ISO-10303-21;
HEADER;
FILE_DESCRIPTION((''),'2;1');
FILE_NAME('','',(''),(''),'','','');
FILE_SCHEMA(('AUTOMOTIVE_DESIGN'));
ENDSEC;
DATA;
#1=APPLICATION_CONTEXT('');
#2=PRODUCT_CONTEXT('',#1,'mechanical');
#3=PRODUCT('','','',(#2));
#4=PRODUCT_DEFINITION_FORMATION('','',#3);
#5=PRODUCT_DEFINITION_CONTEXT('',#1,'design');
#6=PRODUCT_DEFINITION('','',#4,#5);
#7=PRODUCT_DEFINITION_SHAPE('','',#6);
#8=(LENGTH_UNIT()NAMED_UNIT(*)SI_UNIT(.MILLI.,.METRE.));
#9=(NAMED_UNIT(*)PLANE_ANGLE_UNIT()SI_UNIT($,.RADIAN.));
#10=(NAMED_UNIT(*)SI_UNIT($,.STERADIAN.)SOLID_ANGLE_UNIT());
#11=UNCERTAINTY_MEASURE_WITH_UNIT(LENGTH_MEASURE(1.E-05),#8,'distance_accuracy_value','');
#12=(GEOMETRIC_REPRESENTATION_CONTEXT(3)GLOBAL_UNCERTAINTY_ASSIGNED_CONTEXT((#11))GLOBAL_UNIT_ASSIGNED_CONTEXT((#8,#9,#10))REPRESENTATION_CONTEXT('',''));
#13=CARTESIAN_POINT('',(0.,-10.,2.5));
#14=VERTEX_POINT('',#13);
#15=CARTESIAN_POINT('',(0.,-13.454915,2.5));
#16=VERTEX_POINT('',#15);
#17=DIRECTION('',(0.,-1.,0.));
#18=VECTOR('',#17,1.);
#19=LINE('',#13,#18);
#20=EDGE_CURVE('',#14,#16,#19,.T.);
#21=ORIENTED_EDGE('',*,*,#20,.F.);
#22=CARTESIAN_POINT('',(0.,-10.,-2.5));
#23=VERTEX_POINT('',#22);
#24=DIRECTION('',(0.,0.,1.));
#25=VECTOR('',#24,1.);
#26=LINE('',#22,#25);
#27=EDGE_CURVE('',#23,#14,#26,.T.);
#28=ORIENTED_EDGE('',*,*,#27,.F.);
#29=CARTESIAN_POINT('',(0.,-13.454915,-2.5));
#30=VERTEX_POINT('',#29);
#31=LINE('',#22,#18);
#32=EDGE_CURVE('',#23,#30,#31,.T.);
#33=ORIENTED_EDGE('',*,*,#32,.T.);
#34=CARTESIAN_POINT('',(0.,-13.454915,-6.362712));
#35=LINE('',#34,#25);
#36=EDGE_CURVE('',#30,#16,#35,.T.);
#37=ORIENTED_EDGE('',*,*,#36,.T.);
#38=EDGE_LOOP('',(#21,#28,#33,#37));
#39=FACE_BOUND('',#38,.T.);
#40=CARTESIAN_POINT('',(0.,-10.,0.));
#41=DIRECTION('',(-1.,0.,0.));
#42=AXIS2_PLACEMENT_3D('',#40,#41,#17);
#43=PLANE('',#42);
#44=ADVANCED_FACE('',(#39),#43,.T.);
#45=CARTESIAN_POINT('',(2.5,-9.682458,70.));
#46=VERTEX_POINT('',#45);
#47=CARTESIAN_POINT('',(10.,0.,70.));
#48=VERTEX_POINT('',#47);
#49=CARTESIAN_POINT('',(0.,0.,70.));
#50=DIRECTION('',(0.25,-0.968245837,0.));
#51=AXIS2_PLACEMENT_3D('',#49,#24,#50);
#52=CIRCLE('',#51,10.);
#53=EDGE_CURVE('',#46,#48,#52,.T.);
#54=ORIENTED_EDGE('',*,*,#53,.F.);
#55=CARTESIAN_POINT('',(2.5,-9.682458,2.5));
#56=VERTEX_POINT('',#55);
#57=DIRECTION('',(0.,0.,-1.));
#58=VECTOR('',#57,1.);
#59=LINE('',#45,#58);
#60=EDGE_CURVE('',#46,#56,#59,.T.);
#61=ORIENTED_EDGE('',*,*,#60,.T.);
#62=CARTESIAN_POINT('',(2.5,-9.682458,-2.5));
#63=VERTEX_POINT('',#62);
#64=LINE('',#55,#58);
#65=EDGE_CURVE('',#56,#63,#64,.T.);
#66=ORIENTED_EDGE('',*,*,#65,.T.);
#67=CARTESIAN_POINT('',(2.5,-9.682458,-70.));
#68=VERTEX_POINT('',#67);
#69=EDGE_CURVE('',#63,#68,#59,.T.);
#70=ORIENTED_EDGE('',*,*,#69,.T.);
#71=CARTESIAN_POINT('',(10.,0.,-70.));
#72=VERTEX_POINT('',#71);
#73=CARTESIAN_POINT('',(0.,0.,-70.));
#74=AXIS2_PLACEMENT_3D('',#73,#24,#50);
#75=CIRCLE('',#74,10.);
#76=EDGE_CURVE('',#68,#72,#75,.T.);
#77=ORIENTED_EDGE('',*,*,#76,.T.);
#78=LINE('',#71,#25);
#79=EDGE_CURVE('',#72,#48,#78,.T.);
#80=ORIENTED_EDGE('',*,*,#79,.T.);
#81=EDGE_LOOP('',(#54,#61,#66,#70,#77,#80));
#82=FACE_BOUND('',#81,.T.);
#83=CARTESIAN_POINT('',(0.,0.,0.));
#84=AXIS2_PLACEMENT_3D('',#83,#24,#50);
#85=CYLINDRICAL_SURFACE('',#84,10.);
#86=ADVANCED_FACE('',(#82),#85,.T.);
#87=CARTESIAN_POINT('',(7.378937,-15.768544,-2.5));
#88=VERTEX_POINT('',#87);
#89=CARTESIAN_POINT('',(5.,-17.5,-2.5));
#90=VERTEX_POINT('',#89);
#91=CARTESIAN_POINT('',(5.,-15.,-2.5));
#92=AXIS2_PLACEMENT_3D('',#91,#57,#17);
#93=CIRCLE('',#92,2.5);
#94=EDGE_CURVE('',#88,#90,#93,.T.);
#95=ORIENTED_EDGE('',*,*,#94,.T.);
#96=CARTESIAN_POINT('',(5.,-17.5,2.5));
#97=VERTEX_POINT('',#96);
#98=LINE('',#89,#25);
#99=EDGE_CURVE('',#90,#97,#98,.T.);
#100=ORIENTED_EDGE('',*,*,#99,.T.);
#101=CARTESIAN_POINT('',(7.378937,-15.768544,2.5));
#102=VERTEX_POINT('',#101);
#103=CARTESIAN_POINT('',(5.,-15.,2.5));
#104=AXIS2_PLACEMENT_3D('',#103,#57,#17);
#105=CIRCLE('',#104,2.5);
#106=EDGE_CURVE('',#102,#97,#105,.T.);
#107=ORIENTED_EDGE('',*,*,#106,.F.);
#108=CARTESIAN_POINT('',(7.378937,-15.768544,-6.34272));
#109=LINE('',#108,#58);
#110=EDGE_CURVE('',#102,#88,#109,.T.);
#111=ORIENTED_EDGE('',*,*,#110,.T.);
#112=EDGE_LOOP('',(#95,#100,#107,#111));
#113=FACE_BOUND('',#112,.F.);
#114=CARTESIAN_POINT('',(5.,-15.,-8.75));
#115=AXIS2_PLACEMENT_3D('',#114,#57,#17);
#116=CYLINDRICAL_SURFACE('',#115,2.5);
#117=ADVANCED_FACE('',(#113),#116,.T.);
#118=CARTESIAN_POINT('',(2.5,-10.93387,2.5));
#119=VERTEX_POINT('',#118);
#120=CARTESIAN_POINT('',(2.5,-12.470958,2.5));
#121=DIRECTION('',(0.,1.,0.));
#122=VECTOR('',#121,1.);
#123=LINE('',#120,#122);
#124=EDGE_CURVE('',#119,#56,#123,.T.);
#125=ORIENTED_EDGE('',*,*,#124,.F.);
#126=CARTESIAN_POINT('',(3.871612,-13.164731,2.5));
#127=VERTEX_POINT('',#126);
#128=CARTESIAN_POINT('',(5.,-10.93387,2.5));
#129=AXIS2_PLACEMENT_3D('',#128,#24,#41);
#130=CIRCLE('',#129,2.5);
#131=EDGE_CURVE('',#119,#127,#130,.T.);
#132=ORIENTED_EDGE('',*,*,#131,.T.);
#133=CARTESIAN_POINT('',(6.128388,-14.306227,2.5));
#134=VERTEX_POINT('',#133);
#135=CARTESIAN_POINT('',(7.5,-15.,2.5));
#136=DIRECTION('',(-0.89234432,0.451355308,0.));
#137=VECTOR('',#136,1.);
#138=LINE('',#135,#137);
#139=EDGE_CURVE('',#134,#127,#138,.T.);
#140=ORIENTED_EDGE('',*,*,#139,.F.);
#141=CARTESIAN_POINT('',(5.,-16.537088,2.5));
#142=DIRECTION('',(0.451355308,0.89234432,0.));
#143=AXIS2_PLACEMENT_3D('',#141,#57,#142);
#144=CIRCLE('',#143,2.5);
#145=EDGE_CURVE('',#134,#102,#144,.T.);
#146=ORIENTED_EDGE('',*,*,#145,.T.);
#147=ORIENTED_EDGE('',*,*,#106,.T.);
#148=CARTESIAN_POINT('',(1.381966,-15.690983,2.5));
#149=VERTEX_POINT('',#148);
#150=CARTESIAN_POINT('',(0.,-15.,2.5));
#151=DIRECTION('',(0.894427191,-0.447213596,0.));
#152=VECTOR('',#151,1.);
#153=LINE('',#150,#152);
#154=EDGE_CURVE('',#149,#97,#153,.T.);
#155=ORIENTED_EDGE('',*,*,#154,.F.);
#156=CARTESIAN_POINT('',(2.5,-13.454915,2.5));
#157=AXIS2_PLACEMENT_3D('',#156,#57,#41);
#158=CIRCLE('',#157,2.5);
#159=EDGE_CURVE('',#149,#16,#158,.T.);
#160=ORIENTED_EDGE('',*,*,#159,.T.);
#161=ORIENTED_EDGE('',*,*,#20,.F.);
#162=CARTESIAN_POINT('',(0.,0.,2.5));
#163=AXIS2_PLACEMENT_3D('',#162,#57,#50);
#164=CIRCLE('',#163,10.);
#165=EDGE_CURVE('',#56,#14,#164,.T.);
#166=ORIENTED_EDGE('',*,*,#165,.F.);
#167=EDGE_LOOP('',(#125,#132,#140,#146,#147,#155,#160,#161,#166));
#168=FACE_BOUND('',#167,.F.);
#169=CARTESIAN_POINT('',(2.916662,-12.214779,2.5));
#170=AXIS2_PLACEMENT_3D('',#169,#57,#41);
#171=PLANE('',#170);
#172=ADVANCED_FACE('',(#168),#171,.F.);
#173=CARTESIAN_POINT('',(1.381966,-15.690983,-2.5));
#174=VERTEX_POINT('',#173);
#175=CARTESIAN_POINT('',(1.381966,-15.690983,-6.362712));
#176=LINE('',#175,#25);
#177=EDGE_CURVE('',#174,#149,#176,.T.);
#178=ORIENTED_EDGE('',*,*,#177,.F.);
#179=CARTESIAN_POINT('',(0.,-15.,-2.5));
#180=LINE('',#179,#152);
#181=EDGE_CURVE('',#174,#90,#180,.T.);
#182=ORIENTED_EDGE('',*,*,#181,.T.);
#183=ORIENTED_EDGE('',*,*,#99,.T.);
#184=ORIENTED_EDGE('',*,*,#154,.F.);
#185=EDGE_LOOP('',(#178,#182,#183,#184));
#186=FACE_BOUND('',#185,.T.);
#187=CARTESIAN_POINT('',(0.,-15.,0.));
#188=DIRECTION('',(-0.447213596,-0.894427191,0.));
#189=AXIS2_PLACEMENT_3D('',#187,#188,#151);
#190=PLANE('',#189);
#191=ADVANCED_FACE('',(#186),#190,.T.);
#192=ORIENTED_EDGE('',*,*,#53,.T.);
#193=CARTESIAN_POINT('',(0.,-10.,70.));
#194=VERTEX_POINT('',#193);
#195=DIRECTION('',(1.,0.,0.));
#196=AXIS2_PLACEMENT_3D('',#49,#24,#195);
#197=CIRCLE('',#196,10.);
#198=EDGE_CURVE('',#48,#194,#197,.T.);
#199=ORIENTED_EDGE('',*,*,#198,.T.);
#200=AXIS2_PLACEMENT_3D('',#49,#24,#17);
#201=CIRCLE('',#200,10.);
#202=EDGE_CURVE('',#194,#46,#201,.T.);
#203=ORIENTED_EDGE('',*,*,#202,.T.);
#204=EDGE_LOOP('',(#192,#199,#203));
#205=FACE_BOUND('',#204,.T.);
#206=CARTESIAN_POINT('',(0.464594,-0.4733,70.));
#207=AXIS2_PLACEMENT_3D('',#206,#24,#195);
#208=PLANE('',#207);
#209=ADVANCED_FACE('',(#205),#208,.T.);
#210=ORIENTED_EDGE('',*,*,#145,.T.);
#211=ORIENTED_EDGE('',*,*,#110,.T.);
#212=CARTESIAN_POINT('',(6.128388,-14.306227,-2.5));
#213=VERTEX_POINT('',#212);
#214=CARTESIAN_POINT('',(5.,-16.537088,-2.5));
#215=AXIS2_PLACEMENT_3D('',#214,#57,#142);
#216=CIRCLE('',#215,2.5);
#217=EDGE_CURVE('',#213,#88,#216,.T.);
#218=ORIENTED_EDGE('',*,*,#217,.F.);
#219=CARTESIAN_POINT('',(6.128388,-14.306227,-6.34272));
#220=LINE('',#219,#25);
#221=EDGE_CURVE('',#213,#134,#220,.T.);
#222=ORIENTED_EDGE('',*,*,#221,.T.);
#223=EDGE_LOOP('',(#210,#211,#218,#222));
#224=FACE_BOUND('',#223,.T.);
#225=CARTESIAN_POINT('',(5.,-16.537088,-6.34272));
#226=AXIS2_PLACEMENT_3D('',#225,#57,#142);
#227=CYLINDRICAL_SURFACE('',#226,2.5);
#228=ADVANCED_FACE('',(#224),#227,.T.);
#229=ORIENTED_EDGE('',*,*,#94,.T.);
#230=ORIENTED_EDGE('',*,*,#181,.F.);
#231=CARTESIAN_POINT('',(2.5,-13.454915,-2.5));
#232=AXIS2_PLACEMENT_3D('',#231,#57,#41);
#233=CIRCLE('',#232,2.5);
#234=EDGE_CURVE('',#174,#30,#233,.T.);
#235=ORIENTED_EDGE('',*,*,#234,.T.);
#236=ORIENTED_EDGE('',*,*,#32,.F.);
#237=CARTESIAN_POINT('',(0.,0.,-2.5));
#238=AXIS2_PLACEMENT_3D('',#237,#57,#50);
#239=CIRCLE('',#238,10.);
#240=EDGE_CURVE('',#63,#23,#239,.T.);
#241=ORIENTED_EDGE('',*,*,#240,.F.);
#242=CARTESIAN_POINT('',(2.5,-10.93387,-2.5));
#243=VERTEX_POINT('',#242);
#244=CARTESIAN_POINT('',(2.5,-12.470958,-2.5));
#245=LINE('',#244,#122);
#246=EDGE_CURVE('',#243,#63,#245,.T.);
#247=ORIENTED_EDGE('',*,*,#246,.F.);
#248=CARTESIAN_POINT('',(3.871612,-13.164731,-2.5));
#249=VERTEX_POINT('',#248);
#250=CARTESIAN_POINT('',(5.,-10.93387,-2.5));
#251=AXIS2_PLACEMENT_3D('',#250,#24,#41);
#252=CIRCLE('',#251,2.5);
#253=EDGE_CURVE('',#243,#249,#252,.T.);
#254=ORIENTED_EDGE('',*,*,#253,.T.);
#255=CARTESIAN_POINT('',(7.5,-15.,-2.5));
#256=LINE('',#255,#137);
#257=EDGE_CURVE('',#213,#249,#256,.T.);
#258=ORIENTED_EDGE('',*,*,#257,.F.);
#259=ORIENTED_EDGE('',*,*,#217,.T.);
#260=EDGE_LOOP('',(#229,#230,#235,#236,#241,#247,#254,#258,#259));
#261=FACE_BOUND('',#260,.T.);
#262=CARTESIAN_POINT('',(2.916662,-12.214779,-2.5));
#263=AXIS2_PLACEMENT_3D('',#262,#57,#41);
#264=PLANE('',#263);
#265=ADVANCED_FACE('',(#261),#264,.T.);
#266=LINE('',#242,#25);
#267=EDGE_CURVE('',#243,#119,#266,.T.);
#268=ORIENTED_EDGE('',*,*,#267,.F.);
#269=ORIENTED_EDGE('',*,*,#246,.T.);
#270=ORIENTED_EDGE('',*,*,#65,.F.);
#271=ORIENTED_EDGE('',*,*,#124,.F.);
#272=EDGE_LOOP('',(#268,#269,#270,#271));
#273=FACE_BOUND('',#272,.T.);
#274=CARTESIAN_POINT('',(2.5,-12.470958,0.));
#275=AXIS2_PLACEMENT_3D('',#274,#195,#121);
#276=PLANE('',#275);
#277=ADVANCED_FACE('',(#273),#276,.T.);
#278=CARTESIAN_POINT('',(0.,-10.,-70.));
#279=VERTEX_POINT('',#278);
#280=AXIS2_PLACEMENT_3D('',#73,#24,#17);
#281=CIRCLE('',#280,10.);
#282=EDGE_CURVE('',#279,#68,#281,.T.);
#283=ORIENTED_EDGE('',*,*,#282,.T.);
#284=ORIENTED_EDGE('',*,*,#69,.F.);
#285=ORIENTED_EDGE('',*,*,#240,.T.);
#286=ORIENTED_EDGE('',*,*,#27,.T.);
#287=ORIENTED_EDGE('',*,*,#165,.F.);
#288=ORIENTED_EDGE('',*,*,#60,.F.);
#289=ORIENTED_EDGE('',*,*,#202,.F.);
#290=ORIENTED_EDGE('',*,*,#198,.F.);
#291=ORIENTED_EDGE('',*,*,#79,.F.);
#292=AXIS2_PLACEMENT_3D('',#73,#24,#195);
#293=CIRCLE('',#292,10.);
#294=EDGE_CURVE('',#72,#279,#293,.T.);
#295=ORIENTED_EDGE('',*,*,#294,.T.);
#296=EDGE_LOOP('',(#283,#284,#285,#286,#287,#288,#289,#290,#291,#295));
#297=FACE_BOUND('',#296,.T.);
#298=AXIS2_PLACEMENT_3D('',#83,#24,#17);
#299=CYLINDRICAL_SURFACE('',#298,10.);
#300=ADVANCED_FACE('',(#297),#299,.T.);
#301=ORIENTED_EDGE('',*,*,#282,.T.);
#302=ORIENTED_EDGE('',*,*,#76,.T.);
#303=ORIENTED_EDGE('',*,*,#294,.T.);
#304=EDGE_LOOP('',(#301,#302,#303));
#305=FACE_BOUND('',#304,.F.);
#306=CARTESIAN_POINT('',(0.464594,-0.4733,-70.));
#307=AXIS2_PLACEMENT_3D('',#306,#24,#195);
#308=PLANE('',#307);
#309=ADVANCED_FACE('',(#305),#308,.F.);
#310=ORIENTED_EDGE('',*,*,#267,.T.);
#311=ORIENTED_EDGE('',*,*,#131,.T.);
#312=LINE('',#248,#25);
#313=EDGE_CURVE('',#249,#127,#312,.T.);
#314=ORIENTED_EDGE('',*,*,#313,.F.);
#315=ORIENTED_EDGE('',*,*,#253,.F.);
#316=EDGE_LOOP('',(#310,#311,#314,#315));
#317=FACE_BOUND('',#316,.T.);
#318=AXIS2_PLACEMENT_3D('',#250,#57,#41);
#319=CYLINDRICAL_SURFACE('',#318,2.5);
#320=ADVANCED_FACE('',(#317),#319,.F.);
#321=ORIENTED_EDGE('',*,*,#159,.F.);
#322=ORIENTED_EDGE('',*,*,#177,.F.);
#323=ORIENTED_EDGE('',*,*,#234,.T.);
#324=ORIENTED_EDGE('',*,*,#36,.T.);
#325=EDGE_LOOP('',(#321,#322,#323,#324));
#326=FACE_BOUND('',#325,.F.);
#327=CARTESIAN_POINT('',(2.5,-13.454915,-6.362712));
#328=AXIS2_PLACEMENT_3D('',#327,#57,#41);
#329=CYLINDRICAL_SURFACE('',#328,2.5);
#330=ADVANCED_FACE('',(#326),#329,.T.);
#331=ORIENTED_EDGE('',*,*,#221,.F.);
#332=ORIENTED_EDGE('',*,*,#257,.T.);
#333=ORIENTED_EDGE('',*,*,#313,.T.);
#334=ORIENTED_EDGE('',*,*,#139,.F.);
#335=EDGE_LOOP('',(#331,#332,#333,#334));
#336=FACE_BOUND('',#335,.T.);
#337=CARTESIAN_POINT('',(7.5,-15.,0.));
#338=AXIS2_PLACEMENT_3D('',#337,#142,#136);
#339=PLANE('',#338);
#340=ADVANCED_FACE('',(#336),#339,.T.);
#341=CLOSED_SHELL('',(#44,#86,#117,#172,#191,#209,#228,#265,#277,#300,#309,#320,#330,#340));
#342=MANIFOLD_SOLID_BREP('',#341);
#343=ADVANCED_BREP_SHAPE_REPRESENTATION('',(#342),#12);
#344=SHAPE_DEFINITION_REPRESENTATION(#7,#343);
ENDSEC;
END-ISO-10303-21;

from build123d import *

# Parameters (mm, degrees)
F1_DEPTH    = 70
F2_DEPTH    = 2.5
F3_T1_DEPTH = 5
F3_T3_DEPTH = 12.6854399108
F3_T5_DEPTH = 17.5
F3_T7_DEPTH = 12.7254248594


# Not quite as in the source:
# - a fillet or chamfer that OpenCascade refuses, or shapes differently, is made with other operations: its cross-section is extruded or revolved along the edge and cut away or added


with BuildPart() as f1:
    # F0 (on Top) → F1 (new body, symmetric)
    with BuildSketch(Plane.XY):
        with BuildLine():
            ThreePointArc((2.5, -9.6824583655), (7.9056941504, -6.123724357), (10, 0))
            ThreePointArc((10, 0), (-7.0710678119, 7.0710678119), (0, -10))
            ThreePointArc((0, -10), (1.2600429248, -9.9202969627), (2.5, -9.6824583655))
        make_face()
    extrude(amount=F1_DEPTH, both=True)

    # F0 (on Top) → F2 (join, symmetric)
    with BuildSketch(Plane.XY):
        with BuildLine():
            ThreePointArc((2.5, -9.6824583655), (1.2600429248, -9.9202969627), (0, -10))
            Line((0, -10), (0, -12.4709576939))
            Line((0, -12.4709576939), (2.5, -12.4709576939))
            Line((2.5, -12.4709576939), (2.5, -9.6824583655))
        make_face()
        Polygon((2.5, -12.4709576939), (0, -12.4709576939), (0, -15), (5, -17.5), (7.5, -17.5), (7.5, -15), align=None)
    extrude(amount=F2_DEPTH, both=True)

    # F3: fillet of radius 2.5 on 4 edges, made by hand

    # F3_s2 → F3_t1 (join)
    with BuildSketch(Plane.XY.offset(-2.5)):
        with BuildLine():
            ThreePointArc((2.5, -10.9338697117), (2.8703321066, -12.2432644817), (3.871611731, -13.1647305129))
            Line((3.871611731, -13.1647305129), (2.5, -12.4709576939))
            Line((2.5, -12.4709576939), (2.5, -10.9338697117))
        make_face()
    extrude(amount=F3_T1_DEPTH)

    # F3_s4 → F3_t3 (cut)
    with BuildSketch(Plane.XY.offset(-6.3427199554)):
        with BuildLine():
            ThreePointArc((6.128388269, -14.306227181), (7.1296678934, -15.2276932122), (7.5, -16.5370879822))
            Line((7.5, -16.5370879822), (7.5, -15))
            Line((7.5, -15), (6.128388269, -14.306227181))
        make_face()
    extrude(amount=F3_T3_DEPTH, mode=Mode.SUBTRACT)

    # F3_s6 → F3_t5 (cut)
    with BuildSketch(Plane.XY.offset(-8.75)):
        with BuildLine():
            ThreePointArc((5, -17.5), (6.767766953, -16.767766953), (7.5, -15))
            Line((7.5, -15), (7.5, -17.5))
            Line((7.5, -17.5), (5, -17.5))
        make_face()
    extrude(amount=F3_T5_DEPTH, mode=Mode.SUBTRACT)

    # F3_s8 → F3_t7 (cut)
    with BuildSketch(Plane.XY.offset(-6.3627124297)):
        with BuildLine():
            ThreePointArc((0, -13.4549150281), (0.3733729791, -14.7692428084), (1.3819660113, -15.6909830056))
            Line((1.3819660113, -15.6909830056), (0, -15))
            Line((0, -15), (0, -13.4549150281))
        make_face()
    extrude(amount=F3_T7_DEPTH, mode=Mode.SUBTRACT)


solid = f1.part
